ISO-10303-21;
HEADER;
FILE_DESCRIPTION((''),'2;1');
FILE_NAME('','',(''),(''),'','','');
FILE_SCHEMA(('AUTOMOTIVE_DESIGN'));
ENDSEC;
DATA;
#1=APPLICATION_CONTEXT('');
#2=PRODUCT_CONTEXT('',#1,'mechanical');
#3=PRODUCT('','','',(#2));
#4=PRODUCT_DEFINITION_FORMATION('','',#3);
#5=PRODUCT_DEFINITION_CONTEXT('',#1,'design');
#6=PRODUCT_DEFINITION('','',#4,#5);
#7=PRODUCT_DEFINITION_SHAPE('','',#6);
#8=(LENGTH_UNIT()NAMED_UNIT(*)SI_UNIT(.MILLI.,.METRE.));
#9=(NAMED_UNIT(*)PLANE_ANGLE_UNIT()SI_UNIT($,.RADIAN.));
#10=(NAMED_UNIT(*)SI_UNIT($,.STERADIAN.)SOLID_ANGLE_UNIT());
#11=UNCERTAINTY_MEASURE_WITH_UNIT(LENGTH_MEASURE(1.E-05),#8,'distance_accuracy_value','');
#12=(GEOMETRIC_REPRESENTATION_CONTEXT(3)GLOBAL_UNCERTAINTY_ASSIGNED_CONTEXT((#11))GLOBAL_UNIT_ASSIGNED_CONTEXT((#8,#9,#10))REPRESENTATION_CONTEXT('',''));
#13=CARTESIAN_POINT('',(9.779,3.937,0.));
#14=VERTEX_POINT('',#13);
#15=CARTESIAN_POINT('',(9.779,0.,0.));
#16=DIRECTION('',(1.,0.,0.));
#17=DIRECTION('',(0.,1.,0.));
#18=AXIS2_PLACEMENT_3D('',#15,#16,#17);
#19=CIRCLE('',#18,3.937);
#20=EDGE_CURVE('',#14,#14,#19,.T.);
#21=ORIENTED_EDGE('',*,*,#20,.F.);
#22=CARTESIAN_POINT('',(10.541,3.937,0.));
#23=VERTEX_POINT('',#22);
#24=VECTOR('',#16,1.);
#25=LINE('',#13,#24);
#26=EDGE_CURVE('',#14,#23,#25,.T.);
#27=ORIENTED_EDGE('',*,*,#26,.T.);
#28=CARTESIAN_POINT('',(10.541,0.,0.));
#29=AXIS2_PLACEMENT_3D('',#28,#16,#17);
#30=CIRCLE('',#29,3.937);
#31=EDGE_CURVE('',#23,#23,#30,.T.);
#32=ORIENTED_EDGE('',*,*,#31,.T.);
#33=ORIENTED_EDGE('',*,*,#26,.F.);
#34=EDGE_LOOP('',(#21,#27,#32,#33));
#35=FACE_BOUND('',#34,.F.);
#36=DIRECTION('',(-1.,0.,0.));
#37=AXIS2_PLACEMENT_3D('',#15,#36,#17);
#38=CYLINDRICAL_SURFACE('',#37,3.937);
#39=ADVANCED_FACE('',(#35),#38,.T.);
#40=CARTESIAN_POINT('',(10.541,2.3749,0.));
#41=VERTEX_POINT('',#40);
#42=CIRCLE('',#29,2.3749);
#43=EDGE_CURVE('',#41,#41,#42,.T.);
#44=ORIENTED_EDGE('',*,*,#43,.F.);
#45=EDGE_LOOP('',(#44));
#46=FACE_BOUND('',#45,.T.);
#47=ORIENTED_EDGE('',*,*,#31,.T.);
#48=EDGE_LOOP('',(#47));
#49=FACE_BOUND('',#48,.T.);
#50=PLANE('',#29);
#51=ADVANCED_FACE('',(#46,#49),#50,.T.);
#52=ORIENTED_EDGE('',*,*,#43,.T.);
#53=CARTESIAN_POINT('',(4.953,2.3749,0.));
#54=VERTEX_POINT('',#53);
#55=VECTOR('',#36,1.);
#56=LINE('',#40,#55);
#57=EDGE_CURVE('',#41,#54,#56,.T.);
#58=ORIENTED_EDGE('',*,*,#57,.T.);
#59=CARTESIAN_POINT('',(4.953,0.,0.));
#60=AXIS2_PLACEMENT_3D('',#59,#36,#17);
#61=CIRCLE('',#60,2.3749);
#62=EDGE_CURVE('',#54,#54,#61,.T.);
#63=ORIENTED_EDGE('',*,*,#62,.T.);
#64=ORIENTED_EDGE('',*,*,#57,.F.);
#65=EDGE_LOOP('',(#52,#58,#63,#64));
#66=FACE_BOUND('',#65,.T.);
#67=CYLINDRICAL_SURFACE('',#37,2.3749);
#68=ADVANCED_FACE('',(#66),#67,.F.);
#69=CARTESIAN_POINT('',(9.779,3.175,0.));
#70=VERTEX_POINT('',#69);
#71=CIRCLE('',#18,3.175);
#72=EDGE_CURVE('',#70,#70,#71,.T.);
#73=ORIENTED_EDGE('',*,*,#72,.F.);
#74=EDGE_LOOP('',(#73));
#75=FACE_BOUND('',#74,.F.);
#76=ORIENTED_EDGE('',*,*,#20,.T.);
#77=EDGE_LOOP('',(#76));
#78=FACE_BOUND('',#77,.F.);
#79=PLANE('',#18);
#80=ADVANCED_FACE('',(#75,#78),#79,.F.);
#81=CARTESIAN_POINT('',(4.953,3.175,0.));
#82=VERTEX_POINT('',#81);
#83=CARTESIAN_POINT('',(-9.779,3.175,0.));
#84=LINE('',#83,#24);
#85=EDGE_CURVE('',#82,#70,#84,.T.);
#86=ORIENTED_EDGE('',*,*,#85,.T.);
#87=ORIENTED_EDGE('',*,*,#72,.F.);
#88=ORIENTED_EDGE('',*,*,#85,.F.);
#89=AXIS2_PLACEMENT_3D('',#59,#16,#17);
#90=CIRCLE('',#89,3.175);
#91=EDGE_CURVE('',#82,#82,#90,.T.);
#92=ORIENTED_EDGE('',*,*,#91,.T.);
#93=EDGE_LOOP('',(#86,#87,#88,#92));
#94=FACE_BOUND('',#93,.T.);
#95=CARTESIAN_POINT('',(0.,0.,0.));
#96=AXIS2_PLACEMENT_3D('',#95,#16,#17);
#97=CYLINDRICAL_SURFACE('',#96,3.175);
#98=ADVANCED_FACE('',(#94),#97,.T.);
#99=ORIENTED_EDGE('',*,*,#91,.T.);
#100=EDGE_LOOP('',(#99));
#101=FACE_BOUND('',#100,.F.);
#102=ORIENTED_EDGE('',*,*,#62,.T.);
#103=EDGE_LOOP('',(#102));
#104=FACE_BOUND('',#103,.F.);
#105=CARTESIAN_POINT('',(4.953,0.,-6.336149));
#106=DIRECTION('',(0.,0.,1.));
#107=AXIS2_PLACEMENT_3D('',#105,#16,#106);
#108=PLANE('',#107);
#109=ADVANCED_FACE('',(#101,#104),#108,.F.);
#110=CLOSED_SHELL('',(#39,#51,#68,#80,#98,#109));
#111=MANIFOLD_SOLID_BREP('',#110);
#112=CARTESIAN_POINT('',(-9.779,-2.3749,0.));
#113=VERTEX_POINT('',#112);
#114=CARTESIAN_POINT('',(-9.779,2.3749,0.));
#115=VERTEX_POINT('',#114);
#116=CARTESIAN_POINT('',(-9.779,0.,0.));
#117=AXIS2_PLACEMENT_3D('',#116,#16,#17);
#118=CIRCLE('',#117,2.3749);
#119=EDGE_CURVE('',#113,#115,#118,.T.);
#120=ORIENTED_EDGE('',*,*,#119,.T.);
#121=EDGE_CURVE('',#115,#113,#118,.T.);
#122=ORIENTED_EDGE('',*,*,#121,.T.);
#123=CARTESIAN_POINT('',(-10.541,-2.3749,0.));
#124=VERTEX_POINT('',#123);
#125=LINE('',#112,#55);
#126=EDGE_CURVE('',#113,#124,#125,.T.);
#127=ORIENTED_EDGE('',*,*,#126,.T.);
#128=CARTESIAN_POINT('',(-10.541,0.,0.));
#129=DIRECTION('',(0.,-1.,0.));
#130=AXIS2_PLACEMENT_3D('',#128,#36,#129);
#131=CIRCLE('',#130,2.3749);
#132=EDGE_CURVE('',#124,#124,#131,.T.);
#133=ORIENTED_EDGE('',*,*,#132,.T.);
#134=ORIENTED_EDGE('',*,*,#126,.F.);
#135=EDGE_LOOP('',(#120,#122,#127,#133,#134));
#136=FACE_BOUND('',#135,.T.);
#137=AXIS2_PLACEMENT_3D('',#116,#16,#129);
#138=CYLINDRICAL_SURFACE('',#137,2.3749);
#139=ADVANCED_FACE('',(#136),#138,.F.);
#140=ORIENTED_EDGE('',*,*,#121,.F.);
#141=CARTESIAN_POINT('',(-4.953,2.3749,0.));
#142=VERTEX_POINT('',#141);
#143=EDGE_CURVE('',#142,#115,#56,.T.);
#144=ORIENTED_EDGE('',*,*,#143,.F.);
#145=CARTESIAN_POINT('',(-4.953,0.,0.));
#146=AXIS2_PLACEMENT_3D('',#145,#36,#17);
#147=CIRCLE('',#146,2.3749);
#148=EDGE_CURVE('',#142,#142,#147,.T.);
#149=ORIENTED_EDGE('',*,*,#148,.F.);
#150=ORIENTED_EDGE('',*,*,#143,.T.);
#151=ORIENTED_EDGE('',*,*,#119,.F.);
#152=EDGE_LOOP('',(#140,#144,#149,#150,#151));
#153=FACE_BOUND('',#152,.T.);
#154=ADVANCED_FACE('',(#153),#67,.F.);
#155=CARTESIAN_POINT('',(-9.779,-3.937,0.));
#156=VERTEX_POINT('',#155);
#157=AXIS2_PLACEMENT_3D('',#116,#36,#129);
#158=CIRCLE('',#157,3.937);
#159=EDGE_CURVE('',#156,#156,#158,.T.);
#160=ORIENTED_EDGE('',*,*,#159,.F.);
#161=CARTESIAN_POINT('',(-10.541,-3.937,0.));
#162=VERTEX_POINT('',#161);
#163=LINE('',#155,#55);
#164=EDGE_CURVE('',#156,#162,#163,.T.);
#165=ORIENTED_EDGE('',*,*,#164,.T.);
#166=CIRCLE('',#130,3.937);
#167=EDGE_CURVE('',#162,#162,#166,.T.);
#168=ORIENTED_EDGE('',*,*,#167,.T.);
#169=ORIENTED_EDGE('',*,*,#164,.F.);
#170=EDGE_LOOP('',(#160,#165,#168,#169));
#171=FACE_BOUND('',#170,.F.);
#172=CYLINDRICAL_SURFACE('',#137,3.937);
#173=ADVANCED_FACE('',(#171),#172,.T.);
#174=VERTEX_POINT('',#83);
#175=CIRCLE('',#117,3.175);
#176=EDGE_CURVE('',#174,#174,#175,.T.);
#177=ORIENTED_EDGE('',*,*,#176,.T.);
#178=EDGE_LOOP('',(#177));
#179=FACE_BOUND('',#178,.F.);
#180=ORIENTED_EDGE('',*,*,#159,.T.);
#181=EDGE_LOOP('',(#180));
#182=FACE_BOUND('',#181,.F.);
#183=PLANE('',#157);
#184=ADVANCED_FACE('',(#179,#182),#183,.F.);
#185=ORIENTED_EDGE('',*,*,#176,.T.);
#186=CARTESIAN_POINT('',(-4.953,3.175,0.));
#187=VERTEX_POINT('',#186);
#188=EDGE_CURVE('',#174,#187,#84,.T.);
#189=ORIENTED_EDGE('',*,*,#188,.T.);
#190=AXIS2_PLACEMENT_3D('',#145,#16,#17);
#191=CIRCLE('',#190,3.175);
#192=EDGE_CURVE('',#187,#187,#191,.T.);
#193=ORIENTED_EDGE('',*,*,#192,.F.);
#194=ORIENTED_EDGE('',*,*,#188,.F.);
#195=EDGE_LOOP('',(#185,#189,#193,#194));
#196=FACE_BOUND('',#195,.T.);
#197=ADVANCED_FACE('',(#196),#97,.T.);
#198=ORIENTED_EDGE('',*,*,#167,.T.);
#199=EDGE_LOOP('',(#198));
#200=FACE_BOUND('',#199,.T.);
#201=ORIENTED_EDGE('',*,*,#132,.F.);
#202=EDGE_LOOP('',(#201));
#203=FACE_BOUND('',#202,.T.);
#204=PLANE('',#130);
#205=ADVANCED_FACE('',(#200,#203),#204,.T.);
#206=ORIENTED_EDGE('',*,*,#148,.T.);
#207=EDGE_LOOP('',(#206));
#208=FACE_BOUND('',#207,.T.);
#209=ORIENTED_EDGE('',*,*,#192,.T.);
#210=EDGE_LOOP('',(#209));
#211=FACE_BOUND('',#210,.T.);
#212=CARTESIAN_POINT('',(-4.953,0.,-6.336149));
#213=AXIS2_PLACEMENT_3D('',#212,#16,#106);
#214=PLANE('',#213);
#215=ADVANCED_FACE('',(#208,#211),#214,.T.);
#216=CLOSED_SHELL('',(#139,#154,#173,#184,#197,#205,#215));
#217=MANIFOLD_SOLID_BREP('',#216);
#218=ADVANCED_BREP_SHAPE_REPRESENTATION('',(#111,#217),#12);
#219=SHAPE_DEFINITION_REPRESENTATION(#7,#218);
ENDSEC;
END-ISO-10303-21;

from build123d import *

# Parameters (mm, degrees)
F0_R     = 3.175
F0_R_2   = 2.3749
F1_DEPTH = 9.779
F2_R     = 3.937
F2_R_2   = 3.175
F2_R_3   = 2.3749
F3_DEPTH = 0.762
F4_R     = 3.937
F4_R_2   = 3.175
F4_R_3   = 2.3749
F5_DEPTH = 0.762
F6_W     = 9.906
F6_H     = 12.6722976956
F7_DEPTH = 12.7


with BuildPart() as f1:
    # F0 (on Right) → F1 (new body, symmetric)
    with BuildSketch(Plane.YZ):
        Circle(F0_R)
        Circle(F0_R_2, mode=Mode.SUBTRACT)
    extrude(amount=F1_DEPTH, both=True)

    # F2 (on face) → F3 (join)
    with BuildSketch(Plane.YZ.offset(9.779)):
        Circle(F2_R)
        Circle(F2_R_2, mode=Mode.SUBTRACT)
        Circle(F2_R_2)
        Circle(F2_R_3, mode=Mode.SUBTRACT)
    extrude(amount=F3_DEPTH)

    # F4 (on face) → F5 (join)
    with BuildSketch(Plane(origin=(-9.779, 0, 0), x_dir=(0, -1, 0), z_dir=(-1, 0, 0))):
        Circle(F4_R)
        Circle(F4_R_2, mode=Mode.SUBTRACT)
        Circle(F4_R_2)
        Circle(F4_R_3, mode=Mode.SUBTRACT)
    extrude(amount=F5_DEPTH)

    # F6 (on Front) → F7 (cut, symmetric)
    with BuildSketch(Plane.XZ):
        Rectangle(F6_W, F6_H)
    extrude(amount=F7_DEPTH, both=True, mode=Mode.SUBTRACT)


solid = f1.part
